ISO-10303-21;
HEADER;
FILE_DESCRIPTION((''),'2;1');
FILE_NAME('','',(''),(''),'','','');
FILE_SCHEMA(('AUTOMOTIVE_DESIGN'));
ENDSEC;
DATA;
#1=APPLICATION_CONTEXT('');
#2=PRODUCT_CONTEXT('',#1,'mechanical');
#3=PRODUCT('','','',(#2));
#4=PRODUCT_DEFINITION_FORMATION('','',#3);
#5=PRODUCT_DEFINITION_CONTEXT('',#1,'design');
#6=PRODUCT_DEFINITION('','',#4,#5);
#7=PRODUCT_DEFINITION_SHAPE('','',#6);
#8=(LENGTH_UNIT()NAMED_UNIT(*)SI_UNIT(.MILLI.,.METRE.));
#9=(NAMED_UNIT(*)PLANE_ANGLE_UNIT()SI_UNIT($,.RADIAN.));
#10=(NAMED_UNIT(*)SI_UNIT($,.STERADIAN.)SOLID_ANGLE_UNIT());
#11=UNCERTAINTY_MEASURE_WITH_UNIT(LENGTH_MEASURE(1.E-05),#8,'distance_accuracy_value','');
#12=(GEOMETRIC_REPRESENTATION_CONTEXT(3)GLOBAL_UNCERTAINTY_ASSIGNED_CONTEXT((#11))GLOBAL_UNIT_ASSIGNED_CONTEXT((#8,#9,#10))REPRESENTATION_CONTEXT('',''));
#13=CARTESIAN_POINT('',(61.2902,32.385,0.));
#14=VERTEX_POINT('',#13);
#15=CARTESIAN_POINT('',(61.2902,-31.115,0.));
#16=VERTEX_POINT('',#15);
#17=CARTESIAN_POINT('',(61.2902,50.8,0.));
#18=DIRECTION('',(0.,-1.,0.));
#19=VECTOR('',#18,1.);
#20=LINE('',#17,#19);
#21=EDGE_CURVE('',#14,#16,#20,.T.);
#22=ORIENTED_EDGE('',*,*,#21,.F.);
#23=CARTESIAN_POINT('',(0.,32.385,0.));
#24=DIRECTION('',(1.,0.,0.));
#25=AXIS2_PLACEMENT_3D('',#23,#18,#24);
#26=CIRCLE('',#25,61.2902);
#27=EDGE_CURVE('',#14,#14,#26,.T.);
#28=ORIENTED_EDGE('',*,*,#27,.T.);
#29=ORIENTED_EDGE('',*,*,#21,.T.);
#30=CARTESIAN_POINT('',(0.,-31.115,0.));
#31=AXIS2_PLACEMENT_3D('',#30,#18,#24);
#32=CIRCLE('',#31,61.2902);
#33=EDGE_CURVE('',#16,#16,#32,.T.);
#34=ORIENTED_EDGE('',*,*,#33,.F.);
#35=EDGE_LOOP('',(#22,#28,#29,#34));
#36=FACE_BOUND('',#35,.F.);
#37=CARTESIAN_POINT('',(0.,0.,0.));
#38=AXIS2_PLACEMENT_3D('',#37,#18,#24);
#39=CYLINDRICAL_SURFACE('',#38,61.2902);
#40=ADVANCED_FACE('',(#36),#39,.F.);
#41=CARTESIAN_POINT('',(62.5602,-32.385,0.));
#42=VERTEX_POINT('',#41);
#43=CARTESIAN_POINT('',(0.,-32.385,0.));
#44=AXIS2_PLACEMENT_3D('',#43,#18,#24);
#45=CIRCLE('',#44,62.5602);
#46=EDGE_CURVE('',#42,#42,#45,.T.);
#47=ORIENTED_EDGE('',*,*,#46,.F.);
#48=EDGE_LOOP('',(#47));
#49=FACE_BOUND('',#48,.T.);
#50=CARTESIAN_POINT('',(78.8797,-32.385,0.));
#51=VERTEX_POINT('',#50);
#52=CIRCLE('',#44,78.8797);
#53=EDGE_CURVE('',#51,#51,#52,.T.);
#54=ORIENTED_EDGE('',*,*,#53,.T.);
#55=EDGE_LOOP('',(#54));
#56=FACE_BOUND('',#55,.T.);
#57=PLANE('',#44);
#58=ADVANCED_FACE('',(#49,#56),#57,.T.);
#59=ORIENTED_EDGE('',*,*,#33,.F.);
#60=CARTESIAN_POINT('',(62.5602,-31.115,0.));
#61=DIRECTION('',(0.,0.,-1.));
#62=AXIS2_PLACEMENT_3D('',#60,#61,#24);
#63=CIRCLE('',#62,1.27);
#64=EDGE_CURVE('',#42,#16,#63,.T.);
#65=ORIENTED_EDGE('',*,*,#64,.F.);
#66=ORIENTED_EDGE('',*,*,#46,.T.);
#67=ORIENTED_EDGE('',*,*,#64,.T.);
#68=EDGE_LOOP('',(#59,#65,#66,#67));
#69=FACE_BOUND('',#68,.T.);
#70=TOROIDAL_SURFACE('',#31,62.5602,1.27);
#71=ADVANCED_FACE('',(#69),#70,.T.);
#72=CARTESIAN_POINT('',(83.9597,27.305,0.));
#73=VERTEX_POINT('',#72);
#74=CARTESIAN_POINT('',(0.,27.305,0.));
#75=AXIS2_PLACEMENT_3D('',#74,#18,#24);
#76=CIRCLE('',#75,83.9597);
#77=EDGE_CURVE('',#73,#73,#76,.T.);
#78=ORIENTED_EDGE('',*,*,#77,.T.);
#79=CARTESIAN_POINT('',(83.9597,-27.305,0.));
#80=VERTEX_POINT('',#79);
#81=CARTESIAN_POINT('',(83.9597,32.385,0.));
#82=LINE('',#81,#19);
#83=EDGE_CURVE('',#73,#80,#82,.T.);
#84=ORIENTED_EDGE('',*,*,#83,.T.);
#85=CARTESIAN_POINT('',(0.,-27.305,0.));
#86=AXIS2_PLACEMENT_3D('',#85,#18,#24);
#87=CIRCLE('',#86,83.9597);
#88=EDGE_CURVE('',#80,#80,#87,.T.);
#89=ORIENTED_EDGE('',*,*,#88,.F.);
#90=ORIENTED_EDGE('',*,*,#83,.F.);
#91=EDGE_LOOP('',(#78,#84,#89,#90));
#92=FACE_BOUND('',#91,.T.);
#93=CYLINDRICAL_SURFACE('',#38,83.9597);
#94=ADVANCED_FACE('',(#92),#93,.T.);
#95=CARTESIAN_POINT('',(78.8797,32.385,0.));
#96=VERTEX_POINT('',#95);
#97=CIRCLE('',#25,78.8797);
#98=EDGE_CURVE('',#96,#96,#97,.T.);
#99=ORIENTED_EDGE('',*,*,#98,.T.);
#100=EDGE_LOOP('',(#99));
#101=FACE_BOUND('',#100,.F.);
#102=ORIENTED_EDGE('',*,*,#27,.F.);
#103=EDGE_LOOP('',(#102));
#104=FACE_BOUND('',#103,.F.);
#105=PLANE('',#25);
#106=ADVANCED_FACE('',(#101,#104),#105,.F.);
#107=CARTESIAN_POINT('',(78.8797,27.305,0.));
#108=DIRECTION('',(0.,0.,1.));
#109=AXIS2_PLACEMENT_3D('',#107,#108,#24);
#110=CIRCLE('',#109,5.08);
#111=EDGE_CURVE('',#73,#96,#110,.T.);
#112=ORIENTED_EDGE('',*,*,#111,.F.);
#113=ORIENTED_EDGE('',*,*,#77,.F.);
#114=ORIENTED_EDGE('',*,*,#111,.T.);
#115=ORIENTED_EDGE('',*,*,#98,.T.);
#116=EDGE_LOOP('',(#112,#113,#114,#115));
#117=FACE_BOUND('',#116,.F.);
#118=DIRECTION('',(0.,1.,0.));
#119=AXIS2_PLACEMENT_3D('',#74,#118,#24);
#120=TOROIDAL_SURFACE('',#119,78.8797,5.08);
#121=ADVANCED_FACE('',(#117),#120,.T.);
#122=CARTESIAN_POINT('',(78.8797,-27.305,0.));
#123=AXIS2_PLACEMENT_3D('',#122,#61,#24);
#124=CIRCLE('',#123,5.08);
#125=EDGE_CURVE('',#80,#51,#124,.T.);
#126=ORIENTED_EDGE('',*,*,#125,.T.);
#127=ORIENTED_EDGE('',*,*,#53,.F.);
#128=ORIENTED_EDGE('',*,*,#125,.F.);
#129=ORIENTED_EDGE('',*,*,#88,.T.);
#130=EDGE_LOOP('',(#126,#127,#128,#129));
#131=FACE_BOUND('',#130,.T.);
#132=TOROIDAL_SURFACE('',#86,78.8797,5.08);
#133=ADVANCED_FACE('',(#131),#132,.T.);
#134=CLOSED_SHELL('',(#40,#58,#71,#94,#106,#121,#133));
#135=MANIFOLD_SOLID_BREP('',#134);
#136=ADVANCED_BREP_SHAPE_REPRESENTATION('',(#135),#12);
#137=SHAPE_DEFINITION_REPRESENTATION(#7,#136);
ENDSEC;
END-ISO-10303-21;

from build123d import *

# Parameters (mm, degrees)
F0_R     = 83.9597
F1_DEPTH = 32.385
F2_R     = 61.2902
F3_DEPTH = 50.8
F4_R     = 5.08
F5_R     = 1.27


with BuildPart() as f1:
    # F0 (on Front) → F1 (new body, symmetric)
    with BuildSketch(Plane.XZ):
        Circle(F0_R)
    extrude(amount=F1_DEPTH, both=True)

    # F2 (on Front) → F3 (cut, symmetric)
    with BuildSketch(Plane.XZ):
        Circle(F2_R)
    extrude(amount=F3_DEPTH, both=True, mode=Mode.SUBTRACT)

    # F4
    f4_edges = [f1.edges().sort_by_distance(p)[0] for p in [
        (-83.9597, -32.385, 0),
        (-83.9597, 32.385, 0),
    ]]
    fillet(f4_edges, radius=F4_R)

    # F5
    f5_edges = [f1.edges().sort_by_distance(p)[0] for p in [
        (-61.2902, -32.385, 0),
    ]]
    fillet(f5_edges, radius=F5_R)


solid = f1.part
